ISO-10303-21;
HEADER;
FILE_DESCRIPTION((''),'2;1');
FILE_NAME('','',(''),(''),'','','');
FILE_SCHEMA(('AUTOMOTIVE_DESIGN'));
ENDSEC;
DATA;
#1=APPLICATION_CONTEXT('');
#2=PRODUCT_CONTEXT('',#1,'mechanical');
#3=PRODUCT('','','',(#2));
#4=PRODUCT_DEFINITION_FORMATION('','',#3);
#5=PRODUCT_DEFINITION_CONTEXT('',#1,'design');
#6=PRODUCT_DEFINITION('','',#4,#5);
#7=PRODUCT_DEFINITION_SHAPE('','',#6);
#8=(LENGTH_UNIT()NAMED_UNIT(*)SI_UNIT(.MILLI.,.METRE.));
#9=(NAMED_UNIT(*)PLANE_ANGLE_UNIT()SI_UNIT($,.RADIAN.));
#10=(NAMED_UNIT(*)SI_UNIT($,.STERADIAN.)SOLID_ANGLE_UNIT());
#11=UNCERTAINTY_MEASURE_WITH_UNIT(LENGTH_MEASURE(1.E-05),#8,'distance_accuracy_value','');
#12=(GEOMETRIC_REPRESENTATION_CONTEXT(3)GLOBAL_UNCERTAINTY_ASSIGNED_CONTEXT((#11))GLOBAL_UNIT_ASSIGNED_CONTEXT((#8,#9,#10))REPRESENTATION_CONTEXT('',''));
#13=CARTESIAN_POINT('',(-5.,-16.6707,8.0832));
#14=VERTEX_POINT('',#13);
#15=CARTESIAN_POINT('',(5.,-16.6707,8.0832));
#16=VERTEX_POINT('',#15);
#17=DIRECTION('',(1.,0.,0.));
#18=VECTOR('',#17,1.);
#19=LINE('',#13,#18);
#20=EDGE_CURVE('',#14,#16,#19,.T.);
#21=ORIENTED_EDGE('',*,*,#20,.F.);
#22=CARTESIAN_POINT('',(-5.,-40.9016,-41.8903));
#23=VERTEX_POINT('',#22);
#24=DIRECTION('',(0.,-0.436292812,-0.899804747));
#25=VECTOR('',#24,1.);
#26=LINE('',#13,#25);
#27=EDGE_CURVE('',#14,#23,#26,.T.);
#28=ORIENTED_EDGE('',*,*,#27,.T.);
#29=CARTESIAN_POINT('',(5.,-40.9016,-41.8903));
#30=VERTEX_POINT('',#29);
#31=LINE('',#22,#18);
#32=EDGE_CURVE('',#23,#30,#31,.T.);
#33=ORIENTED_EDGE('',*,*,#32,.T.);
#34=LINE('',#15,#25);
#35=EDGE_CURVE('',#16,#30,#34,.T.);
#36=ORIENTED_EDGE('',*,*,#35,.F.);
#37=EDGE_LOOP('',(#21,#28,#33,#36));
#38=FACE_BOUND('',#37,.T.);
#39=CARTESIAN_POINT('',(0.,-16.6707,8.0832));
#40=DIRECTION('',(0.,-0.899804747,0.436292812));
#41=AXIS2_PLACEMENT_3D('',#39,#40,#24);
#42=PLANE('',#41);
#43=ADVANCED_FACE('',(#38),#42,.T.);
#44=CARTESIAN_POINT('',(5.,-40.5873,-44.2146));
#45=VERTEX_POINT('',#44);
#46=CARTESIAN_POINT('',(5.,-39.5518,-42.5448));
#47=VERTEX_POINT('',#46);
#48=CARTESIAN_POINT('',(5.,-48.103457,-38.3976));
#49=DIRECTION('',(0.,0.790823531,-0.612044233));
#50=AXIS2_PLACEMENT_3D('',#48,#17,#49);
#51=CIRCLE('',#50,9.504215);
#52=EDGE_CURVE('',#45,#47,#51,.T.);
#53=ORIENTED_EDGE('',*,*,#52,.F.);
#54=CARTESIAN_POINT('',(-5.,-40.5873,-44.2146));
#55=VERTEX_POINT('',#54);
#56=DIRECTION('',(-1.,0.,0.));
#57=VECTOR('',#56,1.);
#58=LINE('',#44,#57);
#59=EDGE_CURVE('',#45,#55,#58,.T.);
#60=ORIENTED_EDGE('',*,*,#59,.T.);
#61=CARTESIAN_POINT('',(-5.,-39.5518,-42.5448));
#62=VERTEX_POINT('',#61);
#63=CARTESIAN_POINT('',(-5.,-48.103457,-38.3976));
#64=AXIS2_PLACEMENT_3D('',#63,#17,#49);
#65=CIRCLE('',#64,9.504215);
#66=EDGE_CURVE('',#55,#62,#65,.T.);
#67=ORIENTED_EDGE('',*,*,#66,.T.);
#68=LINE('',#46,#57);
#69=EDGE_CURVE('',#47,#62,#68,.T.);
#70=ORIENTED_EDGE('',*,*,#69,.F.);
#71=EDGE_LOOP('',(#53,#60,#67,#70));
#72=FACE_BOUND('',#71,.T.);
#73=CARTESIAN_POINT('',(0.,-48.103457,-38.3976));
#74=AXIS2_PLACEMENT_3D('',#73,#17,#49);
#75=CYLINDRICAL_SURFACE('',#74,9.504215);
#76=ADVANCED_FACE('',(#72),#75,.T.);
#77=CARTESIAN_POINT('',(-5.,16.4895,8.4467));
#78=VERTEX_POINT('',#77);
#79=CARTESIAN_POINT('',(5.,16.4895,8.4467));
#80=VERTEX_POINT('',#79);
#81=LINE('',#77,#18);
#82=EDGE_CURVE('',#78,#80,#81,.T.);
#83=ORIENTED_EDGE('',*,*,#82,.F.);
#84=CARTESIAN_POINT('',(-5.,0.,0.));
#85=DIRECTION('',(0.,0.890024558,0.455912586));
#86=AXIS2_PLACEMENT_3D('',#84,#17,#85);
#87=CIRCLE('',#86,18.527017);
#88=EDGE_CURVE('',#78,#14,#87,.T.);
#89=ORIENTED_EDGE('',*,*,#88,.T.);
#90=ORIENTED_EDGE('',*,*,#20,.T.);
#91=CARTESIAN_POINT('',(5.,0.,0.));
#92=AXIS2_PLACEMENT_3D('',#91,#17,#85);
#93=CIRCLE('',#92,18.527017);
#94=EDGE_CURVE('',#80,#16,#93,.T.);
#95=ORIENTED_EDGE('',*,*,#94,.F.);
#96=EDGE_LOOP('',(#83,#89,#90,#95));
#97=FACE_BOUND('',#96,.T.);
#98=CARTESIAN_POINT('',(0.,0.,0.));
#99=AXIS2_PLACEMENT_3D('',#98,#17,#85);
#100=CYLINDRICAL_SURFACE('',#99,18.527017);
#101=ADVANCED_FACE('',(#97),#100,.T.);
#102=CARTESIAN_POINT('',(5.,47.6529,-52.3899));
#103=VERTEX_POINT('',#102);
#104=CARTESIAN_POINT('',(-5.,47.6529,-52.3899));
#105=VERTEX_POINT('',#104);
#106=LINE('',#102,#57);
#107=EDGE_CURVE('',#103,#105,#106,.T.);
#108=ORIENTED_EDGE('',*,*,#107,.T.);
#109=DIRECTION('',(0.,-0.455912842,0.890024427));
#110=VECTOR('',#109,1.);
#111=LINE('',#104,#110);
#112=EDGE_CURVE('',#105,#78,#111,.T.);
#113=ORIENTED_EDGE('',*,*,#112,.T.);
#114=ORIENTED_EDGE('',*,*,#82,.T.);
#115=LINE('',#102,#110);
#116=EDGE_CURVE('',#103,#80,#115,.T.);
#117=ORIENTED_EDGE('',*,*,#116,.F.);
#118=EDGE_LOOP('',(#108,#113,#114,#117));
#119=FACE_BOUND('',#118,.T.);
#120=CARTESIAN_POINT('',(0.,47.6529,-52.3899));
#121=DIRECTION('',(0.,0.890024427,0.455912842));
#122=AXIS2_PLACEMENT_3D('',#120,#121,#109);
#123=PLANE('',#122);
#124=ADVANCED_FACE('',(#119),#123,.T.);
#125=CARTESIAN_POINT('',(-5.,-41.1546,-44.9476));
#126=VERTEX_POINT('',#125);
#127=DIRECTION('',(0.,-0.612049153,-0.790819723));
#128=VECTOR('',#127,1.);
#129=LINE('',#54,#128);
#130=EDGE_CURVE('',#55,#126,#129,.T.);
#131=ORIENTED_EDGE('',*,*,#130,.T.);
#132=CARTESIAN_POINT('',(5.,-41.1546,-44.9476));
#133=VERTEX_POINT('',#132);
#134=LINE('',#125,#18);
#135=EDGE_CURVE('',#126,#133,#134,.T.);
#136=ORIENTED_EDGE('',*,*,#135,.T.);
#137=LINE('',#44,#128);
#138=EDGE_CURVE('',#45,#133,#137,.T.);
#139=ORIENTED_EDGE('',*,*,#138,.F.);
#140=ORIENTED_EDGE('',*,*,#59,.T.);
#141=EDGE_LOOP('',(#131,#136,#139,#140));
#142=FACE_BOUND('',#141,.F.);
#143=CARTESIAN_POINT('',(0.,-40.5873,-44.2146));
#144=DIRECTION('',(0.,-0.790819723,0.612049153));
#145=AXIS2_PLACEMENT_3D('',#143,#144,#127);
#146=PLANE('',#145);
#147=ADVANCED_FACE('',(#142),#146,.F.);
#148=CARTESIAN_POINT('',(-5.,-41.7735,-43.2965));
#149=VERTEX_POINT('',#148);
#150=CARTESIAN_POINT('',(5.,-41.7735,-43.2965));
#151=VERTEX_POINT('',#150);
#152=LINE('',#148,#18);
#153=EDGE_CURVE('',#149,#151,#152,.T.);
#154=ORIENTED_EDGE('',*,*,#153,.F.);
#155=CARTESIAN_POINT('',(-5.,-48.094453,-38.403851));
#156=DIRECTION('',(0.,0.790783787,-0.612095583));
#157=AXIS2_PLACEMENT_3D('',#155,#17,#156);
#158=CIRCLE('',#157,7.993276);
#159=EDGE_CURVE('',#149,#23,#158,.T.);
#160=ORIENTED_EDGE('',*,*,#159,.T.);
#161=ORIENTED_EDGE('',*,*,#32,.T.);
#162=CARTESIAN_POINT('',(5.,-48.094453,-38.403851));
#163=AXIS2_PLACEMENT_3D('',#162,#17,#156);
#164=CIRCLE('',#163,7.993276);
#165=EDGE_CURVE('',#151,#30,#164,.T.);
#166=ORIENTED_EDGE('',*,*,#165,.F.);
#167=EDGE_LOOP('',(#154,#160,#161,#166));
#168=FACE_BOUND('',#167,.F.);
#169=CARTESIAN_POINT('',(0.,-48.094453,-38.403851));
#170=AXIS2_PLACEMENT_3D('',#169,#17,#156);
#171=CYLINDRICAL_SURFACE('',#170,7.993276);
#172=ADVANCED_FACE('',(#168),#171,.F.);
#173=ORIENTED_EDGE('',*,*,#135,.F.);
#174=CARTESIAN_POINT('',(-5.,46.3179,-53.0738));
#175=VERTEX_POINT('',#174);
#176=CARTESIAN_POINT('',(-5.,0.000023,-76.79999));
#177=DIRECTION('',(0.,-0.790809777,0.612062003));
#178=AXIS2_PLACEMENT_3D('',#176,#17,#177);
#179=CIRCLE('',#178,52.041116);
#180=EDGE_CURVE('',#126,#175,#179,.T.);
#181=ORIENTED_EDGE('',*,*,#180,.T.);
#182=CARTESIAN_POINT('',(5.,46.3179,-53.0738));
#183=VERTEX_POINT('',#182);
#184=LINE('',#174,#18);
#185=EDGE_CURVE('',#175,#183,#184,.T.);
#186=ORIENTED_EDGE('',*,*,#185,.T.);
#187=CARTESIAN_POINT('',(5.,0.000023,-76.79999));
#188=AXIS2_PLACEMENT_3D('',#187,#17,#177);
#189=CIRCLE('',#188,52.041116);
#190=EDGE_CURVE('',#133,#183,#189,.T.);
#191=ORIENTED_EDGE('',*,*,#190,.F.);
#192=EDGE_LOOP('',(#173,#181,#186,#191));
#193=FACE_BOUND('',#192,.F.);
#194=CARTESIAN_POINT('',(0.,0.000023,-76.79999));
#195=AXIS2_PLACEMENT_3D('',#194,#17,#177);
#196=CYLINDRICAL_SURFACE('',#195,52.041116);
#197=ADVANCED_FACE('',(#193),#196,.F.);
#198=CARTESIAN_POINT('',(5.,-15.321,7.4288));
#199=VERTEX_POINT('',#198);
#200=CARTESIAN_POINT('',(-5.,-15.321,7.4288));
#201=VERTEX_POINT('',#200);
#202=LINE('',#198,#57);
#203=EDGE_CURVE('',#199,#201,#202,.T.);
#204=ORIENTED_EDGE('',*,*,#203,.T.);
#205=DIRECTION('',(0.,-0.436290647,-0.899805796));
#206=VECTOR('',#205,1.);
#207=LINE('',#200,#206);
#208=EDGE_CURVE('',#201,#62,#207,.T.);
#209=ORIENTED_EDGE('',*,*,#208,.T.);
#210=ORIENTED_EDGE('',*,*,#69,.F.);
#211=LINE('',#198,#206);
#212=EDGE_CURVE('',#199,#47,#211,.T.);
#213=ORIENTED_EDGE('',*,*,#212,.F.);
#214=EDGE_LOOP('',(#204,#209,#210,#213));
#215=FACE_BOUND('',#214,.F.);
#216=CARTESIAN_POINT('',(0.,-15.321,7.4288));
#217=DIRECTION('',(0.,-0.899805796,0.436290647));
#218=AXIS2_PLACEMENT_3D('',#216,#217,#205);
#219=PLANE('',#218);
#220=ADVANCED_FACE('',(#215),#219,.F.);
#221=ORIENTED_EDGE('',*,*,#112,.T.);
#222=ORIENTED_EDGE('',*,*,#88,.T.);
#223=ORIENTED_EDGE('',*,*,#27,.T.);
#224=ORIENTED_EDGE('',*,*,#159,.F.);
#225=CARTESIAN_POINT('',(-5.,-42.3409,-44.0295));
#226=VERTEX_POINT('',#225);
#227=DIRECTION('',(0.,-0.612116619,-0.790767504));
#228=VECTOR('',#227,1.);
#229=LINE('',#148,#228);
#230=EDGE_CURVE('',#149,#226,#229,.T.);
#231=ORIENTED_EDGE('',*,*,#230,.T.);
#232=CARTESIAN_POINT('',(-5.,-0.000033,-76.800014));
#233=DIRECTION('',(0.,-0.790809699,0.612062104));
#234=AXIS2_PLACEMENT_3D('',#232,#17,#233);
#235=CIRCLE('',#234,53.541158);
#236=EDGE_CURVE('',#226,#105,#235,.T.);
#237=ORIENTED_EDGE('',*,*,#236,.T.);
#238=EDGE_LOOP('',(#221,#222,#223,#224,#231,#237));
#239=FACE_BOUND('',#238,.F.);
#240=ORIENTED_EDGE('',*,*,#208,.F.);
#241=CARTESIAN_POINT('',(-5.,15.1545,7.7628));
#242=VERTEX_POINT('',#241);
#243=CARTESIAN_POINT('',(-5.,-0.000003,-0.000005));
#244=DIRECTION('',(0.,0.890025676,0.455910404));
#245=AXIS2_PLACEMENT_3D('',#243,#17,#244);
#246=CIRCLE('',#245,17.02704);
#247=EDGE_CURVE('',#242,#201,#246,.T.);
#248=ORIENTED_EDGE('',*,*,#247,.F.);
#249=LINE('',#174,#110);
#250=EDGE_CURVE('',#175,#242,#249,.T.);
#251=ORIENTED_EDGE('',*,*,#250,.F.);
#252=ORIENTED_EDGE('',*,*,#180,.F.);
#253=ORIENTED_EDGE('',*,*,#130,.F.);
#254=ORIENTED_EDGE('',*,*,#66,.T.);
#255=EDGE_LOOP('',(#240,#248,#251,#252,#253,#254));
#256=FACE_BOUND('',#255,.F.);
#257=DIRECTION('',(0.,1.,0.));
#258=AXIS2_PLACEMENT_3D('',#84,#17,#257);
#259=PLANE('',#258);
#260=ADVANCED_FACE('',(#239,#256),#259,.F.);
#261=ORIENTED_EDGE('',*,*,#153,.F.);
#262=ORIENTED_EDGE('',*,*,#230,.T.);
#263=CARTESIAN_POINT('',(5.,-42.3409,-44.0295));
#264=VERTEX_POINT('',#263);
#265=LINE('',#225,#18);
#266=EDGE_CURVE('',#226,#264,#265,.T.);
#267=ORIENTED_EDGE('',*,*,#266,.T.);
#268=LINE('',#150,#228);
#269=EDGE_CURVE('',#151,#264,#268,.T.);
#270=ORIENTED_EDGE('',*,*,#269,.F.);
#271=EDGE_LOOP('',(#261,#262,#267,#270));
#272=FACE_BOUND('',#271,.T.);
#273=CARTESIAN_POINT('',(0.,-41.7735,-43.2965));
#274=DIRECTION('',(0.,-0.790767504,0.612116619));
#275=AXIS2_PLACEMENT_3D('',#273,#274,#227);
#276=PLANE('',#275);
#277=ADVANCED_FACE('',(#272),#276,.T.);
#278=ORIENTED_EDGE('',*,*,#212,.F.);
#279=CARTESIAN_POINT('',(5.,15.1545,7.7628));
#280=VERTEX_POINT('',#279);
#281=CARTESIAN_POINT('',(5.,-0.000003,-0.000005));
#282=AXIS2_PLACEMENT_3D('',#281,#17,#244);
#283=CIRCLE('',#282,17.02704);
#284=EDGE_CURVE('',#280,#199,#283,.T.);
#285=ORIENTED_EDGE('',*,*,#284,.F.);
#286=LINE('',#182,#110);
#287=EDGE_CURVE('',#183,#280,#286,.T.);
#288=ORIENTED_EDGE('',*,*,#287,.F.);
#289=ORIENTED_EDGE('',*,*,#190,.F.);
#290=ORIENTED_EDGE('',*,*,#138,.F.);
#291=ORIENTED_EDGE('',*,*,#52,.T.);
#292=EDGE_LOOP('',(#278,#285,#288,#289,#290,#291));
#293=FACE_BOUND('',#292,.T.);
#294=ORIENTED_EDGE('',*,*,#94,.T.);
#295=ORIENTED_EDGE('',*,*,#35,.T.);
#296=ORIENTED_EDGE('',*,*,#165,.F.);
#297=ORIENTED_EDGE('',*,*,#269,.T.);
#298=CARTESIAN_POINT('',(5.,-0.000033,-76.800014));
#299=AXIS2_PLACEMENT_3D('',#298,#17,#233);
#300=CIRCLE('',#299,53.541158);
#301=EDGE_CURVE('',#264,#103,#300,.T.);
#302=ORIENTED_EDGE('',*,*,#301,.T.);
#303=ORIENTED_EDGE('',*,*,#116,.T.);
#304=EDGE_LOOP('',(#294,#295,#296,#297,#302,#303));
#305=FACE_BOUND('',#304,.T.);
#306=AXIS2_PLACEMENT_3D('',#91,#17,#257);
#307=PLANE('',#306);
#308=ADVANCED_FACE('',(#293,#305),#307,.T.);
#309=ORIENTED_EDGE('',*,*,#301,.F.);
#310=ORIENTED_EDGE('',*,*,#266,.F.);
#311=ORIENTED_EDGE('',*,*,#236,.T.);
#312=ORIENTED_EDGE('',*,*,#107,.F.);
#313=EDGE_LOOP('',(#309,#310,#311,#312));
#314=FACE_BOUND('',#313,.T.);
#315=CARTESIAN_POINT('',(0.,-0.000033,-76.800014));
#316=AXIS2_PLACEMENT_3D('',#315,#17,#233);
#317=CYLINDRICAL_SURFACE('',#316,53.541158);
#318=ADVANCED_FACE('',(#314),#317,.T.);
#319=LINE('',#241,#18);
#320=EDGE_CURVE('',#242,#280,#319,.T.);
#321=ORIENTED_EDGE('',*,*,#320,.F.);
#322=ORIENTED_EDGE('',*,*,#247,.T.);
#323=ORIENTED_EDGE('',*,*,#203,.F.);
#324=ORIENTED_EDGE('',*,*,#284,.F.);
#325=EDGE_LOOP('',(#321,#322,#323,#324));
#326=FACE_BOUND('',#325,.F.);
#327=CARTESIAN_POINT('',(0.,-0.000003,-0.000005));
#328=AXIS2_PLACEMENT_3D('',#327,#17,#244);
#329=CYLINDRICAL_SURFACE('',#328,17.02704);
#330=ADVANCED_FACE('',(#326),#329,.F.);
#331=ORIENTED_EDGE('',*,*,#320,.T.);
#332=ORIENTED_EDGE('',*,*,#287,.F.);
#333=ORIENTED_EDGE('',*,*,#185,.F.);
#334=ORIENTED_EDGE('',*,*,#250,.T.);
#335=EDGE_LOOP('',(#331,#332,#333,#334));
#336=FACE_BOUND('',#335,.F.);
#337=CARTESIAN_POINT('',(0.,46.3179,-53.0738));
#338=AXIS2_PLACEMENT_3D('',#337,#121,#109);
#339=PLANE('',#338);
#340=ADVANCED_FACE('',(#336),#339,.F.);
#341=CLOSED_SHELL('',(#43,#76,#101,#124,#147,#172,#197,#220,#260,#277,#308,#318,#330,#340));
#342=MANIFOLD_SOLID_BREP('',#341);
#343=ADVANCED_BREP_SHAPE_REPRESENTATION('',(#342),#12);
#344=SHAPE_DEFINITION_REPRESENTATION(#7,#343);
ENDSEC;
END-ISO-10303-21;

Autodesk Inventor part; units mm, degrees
ref_plane "YZ Plane" through (0, 0, 0) normal (1, 0, 0) x (0, 1, 0)
ref_plane "XZ Plane" through (0, 0, 0) normal (0, 1, 0) x (-1, 0, 0)
ref_plane "XY Plane" through (0, 0, 0) normal (0, 0, 1) x (1, 0, 0)
sketch "スケッチ1" plane through (0, 0, 0) normal (1, 0, 0) x (0, 1, 0)
  arc A0 (15.5817, 7.9817) -> (-15.7529, 7.6382) centre (0, 0) ccw
  arc A1 (-41.5342, -44.6538) -> (46.7451, -52.855) centre (0, -76.8) ccw
  arc A2 (-40.9669, -43.9208) -> (-39.9838, -42.3353) centre (-48.1, -38.4) ccw
  line L0 (-39.9838, -42.3353) -> (-15.7529, 7.6382)
  line L1 (46.7451, -52.855) -> (15.5817, 7.9817)
  line L2 (-40.9669, -43.9208) -> (-41.5342, -44.6538)
  arc A3 (16.4895, 8.4467) -> (-16.6707, 8.0832) centre (0, 0) ccw
  line L3 (-16.6707, 8.0832) -> (-40.9016, -41.8903)
  arc A4 (-41.7735, -43.2965) -> (-40.9016, -41.8903) centre (-48.1, -38.4) ccw
  line L4 (-41.7735, -43.2965) -> (-42.3409, -44.0295)
  arc A5 (-42.3409, -44.0295) -> (47.6529, -52.3899) centre (0, -76.8) ccw
  line L5 (47.6529, -52.3899) -> (16.4895, 8.4467)
  arc A6 (15.1545, 7.7628) -> (-15.321, 7.4288) centre (0, 0) ccw
  line L6 (-15.321, 7.4288) -> (-39.5518, -42.5448)
  arc A7 (-40.5873, -44.2146) -> (-39.5518, -42.5448) centre (-48.1, -38.4) ccw
  line L7 (-40.5873, -44.2146) -> (-41.1546, -44.9476)
  arc A8 (-41.1546, -44.9476) -> (46.3179, -53.0738) centre (0, -76.8) ccw
  line L8 (46.3179, -53.0738) -> (15.1545, 7.7628)
  dimension "d0" = 35.0141
  dimension "d1" = 105.0423
  dimension "d2" = 76.8
  dimension "d25" = 8
  dimension "d26" = 38.4
  dimension "d30" = 48.1
  dimension "d31" = 1.5
  dimension "d32" = 0.48
extrude "押し出し1" add sketch "スケッチ1" along normal mid plane 10 contours L1 A1 L2 A2 L0 A0 | L5 A5 L4 A4 L3 A3
equation "\"d26\" = 0.5 * d2"
properties part number "belt_2" material "ゴム"
